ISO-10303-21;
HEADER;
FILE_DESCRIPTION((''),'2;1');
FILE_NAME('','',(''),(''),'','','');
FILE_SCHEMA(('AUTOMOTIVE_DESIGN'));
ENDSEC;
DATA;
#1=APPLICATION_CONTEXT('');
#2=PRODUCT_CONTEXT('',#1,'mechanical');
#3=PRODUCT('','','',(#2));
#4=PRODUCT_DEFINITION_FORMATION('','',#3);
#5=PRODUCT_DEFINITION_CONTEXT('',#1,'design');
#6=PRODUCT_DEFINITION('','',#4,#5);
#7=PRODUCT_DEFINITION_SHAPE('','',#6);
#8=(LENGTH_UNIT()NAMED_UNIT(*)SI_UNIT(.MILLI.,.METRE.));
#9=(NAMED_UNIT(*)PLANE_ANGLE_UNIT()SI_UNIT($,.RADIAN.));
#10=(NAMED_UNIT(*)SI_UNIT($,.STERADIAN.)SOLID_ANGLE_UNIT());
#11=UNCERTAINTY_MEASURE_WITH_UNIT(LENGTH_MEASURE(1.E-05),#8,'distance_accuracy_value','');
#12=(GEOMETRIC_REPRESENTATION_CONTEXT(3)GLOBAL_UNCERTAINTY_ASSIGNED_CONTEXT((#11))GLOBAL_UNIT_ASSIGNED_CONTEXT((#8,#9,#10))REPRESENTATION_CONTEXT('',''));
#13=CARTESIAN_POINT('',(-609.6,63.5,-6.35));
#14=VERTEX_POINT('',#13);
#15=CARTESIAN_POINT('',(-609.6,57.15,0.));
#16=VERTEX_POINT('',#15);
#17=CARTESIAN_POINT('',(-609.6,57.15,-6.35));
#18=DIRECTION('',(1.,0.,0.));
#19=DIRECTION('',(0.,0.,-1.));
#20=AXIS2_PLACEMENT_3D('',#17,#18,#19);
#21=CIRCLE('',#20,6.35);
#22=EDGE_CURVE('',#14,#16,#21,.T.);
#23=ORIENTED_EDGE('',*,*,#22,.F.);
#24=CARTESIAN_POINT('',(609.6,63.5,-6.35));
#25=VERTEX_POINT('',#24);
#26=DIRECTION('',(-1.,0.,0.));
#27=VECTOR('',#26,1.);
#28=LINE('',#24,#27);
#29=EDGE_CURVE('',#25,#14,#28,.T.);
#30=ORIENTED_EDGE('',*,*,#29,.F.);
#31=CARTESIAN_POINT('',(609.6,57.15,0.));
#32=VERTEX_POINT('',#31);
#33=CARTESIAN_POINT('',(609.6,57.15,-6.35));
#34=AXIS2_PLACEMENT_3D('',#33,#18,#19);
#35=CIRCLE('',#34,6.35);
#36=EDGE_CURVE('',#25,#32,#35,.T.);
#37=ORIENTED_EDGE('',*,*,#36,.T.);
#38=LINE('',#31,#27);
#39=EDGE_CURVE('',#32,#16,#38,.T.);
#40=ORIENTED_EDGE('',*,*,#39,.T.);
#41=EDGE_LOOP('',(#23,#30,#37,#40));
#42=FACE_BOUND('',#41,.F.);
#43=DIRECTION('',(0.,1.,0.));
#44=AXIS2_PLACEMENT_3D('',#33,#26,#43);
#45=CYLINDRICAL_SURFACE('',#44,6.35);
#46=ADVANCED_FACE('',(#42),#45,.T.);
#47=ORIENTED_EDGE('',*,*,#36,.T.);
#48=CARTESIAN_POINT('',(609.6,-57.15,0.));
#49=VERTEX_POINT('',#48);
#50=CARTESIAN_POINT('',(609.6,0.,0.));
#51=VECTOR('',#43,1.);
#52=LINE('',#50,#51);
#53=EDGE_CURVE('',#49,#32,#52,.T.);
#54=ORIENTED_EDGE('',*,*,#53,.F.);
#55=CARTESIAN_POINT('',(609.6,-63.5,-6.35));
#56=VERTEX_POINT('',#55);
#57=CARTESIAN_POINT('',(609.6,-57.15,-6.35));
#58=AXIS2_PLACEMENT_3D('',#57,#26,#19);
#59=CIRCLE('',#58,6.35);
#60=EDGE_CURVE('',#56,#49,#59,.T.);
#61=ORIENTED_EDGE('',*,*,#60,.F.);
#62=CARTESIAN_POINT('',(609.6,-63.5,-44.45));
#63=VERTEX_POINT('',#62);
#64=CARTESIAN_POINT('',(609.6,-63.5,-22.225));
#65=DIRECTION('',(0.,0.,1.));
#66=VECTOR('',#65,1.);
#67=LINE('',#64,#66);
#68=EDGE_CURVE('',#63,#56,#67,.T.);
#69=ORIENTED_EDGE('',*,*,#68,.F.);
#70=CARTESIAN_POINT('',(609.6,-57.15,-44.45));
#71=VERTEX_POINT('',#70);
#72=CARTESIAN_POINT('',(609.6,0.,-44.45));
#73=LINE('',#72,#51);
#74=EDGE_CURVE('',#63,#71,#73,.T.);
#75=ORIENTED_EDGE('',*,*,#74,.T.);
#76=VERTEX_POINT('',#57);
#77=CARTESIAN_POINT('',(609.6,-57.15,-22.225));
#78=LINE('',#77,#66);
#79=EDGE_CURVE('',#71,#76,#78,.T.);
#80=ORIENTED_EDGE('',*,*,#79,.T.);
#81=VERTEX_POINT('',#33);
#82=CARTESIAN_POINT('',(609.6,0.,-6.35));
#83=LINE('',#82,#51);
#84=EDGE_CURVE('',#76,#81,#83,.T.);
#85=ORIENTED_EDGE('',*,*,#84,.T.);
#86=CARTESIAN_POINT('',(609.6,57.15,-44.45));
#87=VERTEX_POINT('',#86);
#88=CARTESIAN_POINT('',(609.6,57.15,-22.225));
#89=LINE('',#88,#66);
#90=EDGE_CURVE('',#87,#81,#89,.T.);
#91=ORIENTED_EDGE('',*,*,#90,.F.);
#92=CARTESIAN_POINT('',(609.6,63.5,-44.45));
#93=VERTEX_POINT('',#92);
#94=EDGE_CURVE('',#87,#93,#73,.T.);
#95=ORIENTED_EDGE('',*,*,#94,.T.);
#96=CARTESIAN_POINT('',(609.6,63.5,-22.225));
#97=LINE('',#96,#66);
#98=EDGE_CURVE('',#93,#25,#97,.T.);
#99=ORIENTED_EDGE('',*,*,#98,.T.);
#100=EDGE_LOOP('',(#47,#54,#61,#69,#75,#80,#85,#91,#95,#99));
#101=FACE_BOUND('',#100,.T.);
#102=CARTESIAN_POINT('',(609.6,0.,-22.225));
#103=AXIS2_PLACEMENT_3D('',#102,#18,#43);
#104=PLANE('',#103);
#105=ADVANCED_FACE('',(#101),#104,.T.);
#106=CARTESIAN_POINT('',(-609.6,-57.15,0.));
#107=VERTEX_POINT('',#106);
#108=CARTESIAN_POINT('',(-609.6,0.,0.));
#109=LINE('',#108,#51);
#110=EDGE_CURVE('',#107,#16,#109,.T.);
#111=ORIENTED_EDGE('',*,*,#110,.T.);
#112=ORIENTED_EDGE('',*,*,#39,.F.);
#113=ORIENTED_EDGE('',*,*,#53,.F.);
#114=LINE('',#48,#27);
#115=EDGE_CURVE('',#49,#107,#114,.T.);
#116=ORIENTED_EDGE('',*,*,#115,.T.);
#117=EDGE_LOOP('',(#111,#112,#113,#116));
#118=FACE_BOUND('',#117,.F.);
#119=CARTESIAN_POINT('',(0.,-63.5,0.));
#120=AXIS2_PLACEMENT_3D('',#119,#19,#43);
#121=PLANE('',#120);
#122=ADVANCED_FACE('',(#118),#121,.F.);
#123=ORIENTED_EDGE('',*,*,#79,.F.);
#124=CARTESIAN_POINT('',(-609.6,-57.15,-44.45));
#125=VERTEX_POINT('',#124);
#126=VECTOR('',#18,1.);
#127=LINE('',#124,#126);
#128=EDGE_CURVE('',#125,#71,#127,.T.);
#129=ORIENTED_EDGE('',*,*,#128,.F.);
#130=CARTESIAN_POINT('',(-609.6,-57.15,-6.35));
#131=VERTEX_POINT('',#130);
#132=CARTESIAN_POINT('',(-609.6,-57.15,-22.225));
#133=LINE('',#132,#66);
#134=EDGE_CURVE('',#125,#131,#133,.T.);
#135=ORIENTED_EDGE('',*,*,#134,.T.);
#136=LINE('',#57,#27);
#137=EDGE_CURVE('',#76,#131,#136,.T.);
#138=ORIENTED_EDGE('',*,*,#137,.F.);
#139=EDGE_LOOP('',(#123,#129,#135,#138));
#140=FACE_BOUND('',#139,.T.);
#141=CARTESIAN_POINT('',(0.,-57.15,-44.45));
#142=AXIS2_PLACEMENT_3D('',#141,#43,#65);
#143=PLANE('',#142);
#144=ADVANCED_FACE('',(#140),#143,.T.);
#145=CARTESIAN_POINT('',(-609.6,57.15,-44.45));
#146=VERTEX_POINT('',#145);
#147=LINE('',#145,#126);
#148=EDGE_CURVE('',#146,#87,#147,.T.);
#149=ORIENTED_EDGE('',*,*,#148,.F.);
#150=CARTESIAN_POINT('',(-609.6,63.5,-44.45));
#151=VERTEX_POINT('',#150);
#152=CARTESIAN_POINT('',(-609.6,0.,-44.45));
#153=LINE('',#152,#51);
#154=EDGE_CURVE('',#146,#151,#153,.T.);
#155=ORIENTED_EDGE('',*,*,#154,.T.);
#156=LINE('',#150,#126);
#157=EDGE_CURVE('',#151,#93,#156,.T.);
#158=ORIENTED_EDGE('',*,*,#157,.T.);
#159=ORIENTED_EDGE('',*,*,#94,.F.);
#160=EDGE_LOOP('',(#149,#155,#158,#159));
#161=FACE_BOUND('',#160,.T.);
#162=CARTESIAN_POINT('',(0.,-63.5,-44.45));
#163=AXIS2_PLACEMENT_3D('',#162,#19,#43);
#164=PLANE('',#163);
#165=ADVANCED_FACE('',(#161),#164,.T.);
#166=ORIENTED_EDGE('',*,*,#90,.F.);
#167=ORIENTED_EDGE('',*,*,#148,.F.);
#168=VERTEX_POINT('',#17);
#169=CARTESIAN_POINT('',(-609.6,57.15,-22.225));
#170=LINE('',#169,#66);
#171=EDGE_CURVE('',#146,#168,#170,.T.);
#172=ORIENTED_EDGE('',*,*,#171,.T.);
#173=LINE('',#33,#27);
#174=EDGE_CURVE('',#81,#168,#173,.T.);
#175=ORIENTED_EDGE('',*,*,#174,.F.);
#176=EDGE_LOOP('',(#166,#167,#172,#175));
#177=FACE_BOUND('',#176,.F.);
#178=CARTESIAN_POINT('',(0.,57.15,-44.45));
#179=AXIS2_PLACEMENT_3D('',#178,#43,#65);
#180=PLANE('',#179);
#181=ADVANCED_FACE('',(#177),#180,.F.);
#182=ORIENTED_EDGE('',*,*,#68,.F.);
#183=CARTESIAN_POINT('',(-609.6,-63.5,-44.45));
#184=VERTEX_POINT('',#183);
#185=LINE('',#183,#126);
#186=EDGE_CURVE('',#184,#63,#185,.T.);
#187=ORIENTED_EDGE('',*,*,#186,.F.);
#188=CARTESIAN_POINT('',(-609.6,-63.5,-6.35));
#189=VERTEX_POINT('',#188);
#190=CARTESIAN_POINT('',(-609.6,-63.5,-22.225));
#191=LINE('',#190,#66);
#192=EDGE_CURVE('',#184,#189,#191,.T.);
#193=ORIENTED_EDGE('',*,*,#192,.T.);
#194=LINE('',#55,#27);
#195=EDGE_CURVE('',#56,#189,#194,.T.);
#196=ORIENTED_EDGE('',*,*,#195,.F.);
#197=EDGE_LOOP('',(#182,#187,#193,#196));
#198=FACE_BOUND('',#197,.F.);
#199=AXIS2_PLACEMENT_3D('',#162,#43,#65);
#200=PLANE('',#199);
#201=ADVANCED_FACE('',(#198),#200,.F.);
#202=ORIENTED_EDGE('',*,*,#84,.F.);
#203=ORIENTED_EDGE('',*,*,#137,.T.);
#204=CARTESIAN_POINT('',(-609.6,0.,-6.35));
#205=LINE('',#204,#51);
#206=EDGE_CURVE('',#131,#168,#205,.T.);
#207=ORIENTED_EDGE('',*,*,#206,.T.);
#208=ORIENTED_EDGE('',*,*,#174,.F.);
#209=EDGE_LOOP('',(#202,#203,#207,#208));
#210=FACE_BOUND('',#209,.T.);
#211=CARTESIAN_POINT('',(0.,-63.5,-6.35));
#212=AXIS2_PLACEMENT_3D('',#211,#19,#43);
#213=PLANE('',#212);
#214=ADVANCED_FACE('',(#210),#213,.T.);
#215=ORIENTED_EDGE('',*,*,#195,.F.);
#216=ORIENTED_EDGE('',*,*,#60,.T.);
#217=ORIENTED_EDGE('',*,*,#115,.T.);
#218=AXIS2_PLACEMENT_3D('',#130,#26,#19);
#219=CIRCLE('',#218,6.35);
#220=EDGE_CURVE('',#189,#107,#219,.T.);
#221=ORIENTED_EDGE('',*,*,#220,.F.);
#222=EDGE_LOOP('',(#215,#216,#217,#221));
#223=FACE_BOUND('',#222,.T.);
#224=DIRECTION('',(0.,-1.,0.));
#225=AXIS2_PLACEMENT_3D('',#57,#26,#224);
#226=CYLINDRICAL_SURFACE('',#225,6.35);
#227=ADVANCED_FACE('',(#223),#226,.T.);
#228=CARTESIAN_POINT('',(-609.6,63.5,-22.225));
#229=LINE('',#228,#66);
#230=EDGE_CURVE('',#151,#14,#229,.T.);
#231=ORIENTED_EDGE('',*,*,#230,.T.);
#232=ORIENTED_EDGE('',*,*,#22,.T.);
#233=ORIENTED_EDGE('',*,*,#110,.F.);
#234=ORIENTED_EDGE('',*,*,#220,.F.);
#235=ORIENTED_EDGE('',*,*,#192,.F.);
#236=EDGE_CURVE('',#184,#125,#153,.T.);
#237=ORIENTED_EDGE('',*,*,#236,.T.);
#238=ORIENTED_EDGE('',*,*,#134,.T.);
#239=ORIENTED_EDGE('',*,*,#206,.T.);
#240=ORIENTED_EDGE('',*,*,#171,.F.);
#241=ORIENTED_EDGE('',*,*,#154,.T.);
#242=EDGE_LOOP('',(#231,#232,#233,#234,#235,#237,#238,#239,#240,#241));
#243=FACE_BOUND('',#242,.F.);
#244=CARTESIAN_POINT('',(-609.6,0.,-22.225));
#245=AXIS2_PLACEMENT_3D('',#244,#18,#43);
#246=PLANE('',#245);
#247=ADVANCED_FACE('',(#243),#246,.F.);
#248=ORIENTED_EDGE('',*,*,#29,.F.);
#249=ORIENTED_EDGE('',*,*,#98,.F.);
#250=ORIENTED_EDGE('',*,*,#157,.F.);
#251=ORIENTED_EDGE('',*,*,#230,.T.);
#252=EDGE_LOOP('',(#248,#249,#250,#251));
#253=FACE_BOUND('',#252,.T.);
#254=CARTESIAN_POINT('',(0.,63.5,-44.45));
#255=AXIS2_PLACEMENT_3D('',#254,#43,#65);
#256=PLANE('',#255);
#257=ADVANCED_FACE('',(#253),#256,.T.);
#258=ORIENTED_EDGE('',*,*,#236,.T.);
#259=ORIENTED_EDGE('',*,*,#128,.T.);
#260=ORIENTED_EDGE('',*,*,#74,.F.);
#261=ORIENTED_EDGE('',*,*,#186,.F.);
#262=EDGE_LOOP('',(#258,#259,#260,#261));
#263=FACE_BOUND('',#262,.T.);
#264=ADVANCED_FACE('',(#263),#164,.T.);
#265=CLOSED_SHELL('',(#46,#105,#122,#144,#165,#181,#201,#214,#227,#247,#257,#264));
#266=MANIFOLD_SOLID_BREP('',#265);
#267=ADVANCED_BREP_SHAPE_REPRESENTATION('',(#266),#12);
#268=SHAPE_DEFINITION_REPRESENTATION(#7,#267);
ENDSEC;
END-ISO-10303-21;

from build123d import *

# Parameters (mm, degrees)
F0_W     = 127
F0_H     = 44.45
F1_DEPTH = 609.6
F2_R     = 6.35
F3_T     = 6.35


# Not quite as in the source:
# - a shell that OpenCascade refuses in one call is made with other operations: the cavity is built on its own and cut out


with BuildPart() as f1:
    # F0 (on Right) → F1 (new body, symmetric)
    with BuildSketch(Plane.YZ):
        with Locations((0, -22.225)):
            Rectangle(F0_W, F0_H)
    extrude(amount=F1_DEPTH, both=True)

    # F2
    f2_edges = [f1.edges().sort_by_distance(p)[0] for p in [
        (0, -63.5, 0),
        (0, 63.5, 0),
    ]]
    fillet(f2_edges, radius=F2_R)

    # F3: shell of thickness 6.35, made by hand


with BuildPart() as f3_core1:
    # F3_t2: copy of F1
    add(f1.part)

    # the walls: a layer under each face that stays
    f3_faces = [f3_core1.faces().sort_by_distance(p)[0] for p in [
        (0, 0, 0),
        (0, 63.5, -25.4),
        (0, -63.5, -25.4),
    ]]
    thicken(f3_faces, amount=-F3_T, mode=Mode.SUBTRACT)


with BuildPart() as f1_1:
    add(f1.part)

    # what is left inside the walls is the cavity
    f3_cavity = [f3_core1.part.solids().sort_by_distance(p)[0] for p in [
        (-203.2, 0, -44.3865),
    ]]
    add(f3_cavity, mode=Mode.SUBTRACT)


solid = f1_1.part
